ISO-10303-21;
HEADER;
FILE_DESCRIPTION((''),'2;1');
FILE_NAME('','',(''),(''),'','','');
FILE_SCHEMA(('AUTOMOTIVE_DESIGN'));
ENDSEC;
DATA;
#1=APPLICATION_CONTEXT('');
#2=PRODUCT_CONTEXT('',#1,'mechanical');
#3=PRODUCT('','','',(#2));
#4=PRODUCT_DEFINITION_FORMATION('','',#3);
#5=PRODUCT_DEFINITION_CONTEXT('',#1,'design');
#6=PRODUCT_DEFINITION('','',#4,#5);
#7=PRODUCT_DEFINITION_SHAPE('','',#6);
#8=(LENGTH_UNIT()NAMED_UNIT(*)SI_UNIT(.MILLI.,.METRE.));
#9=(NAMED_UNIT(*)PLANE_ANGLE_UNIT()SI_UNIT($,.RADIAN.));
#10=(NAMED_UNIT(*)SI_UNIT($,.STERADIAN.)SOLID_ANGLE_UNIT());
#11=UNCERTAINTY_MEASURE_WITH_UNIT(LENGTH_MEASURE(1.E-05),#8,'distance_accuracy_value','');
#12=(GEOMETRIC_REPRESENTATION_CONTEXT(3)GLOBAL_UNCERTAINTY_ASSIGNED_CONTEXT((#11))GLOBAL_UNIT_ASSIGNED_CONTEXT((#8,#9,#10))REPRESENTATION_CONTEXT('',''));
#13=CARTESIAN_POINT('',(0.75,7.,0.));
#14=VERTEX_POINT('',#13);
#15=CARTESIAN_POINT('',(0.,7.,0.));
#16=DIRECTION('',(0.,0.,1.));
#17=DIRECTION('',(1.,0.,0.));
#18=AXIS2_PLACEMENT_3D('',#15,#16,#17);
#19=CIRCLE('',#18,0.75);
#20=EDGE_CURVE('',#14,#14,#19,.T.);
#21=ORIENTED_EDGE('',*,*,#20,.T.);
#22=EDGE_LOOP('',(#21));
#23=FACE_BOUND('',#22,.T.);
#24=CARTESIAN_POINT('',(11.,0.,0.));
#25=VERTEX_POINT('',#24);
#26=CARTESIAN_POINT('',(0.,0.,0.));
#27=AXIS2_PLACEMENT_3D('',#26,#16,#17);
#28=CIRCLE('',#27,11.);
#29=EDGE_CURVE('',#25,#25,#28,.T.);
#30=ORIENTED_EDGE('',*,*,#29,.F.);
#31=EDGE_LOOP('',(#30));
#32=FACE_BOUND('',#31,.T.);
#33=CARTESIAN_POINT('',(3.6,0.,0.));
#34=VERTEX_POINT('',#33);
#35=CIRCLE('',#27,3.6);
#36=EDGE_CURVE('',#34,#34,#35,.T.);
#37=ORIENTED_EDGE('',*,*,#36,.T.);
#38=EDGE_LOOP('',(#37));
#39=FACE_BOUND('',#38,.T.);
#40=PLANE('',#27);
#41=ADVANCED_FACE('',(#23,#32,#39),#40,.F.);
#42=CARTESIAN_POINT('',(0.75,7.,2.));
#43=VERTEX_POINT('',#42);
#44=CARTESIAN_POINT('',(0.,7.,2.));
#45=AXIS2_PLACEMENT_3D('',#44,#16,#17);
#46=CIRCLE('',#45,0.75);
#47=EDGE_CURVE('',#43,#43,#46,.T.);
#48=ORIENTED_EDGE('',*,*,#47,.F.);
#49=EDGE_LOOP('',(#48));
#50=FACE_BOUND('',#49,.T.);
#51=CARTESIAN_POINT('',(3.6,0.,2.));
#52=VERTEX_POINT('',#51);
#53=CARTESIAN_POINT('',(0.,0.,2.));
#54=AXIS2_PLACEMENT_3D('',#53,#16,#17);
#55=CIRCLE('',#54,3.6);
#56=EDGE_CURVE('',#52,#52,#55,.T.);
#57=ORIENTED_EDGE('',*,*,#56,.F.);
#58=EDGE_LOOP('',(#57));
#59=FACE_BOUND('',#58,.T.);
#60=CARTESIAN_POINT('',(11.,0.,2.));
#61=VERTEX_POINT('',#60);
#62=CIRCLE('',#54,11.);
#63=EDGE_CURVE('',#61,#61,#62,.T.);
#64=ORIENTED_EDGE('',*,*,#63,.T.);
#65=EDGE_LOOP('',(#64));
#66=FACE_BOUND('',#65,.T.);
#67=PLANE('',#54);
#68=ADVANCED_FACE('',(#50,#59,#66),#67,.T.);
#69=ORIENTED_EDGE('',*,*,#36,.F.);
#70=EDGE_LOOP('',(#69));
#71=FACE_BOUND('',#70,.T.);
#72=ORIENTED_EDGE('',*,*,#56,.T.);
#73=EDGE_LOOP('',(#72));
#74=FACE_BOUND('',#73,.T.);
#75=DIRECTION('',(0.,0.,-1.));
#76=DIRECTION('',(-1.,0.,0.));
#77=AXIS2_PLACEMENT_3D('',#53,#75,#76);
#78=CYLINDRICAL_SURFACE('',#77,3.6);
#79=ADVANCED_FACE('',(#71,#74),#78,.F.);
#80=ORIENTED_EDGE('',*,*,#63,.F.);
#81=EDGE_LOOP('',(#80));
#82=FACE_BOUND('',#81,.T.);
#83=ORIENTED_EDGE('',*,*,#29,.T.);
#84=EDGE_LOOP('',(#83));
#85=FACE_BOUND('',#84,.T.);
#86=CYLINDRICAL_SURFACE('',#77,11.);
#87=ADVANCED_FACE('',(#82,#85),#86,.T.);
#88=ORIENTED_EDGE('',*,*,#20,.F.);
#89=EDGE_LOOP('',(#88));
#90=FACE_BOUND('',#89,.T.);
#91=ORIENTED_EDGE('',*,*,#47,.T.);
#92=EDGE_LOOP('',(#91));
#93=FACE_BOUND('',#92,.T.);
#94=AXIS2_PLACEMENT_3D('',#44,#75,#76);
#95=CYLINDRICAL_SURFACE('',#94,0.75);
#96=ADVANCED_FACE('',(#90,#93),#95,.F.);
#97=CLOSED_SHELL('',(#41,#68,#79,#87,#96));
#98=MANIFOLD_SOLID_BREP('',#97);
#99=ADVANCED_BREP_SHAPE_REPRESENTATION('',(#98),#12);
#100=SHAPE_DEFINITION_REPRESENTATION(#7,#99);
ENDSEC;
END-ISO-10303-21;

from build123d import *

# Parameters (mm, degrees)
MODEL_R                = 11
MODEL_R_2              = 0.75
MODEL_R_3              = 3.6
AX12_PULLEY_BODY_DEPTH = 2


# Read off the part's stored shape, not the designer's step: RobotHandParameters
with BuildPart() as part:
    # Model → AX12 pulley Body (new body)
    with BuildSketch(Plane.XY):
        Circle(MODEL_R)
        with Locations((0, 7)):
            Circle(MODEL_R_2, mode=Mode.SUBTRACT)
        Circle(MODEL_R_3, mode=Mode.SUBTRACT)
    extrude(amount=AX12_PULLEY_BODY_DEPTH)


solid = part.part
